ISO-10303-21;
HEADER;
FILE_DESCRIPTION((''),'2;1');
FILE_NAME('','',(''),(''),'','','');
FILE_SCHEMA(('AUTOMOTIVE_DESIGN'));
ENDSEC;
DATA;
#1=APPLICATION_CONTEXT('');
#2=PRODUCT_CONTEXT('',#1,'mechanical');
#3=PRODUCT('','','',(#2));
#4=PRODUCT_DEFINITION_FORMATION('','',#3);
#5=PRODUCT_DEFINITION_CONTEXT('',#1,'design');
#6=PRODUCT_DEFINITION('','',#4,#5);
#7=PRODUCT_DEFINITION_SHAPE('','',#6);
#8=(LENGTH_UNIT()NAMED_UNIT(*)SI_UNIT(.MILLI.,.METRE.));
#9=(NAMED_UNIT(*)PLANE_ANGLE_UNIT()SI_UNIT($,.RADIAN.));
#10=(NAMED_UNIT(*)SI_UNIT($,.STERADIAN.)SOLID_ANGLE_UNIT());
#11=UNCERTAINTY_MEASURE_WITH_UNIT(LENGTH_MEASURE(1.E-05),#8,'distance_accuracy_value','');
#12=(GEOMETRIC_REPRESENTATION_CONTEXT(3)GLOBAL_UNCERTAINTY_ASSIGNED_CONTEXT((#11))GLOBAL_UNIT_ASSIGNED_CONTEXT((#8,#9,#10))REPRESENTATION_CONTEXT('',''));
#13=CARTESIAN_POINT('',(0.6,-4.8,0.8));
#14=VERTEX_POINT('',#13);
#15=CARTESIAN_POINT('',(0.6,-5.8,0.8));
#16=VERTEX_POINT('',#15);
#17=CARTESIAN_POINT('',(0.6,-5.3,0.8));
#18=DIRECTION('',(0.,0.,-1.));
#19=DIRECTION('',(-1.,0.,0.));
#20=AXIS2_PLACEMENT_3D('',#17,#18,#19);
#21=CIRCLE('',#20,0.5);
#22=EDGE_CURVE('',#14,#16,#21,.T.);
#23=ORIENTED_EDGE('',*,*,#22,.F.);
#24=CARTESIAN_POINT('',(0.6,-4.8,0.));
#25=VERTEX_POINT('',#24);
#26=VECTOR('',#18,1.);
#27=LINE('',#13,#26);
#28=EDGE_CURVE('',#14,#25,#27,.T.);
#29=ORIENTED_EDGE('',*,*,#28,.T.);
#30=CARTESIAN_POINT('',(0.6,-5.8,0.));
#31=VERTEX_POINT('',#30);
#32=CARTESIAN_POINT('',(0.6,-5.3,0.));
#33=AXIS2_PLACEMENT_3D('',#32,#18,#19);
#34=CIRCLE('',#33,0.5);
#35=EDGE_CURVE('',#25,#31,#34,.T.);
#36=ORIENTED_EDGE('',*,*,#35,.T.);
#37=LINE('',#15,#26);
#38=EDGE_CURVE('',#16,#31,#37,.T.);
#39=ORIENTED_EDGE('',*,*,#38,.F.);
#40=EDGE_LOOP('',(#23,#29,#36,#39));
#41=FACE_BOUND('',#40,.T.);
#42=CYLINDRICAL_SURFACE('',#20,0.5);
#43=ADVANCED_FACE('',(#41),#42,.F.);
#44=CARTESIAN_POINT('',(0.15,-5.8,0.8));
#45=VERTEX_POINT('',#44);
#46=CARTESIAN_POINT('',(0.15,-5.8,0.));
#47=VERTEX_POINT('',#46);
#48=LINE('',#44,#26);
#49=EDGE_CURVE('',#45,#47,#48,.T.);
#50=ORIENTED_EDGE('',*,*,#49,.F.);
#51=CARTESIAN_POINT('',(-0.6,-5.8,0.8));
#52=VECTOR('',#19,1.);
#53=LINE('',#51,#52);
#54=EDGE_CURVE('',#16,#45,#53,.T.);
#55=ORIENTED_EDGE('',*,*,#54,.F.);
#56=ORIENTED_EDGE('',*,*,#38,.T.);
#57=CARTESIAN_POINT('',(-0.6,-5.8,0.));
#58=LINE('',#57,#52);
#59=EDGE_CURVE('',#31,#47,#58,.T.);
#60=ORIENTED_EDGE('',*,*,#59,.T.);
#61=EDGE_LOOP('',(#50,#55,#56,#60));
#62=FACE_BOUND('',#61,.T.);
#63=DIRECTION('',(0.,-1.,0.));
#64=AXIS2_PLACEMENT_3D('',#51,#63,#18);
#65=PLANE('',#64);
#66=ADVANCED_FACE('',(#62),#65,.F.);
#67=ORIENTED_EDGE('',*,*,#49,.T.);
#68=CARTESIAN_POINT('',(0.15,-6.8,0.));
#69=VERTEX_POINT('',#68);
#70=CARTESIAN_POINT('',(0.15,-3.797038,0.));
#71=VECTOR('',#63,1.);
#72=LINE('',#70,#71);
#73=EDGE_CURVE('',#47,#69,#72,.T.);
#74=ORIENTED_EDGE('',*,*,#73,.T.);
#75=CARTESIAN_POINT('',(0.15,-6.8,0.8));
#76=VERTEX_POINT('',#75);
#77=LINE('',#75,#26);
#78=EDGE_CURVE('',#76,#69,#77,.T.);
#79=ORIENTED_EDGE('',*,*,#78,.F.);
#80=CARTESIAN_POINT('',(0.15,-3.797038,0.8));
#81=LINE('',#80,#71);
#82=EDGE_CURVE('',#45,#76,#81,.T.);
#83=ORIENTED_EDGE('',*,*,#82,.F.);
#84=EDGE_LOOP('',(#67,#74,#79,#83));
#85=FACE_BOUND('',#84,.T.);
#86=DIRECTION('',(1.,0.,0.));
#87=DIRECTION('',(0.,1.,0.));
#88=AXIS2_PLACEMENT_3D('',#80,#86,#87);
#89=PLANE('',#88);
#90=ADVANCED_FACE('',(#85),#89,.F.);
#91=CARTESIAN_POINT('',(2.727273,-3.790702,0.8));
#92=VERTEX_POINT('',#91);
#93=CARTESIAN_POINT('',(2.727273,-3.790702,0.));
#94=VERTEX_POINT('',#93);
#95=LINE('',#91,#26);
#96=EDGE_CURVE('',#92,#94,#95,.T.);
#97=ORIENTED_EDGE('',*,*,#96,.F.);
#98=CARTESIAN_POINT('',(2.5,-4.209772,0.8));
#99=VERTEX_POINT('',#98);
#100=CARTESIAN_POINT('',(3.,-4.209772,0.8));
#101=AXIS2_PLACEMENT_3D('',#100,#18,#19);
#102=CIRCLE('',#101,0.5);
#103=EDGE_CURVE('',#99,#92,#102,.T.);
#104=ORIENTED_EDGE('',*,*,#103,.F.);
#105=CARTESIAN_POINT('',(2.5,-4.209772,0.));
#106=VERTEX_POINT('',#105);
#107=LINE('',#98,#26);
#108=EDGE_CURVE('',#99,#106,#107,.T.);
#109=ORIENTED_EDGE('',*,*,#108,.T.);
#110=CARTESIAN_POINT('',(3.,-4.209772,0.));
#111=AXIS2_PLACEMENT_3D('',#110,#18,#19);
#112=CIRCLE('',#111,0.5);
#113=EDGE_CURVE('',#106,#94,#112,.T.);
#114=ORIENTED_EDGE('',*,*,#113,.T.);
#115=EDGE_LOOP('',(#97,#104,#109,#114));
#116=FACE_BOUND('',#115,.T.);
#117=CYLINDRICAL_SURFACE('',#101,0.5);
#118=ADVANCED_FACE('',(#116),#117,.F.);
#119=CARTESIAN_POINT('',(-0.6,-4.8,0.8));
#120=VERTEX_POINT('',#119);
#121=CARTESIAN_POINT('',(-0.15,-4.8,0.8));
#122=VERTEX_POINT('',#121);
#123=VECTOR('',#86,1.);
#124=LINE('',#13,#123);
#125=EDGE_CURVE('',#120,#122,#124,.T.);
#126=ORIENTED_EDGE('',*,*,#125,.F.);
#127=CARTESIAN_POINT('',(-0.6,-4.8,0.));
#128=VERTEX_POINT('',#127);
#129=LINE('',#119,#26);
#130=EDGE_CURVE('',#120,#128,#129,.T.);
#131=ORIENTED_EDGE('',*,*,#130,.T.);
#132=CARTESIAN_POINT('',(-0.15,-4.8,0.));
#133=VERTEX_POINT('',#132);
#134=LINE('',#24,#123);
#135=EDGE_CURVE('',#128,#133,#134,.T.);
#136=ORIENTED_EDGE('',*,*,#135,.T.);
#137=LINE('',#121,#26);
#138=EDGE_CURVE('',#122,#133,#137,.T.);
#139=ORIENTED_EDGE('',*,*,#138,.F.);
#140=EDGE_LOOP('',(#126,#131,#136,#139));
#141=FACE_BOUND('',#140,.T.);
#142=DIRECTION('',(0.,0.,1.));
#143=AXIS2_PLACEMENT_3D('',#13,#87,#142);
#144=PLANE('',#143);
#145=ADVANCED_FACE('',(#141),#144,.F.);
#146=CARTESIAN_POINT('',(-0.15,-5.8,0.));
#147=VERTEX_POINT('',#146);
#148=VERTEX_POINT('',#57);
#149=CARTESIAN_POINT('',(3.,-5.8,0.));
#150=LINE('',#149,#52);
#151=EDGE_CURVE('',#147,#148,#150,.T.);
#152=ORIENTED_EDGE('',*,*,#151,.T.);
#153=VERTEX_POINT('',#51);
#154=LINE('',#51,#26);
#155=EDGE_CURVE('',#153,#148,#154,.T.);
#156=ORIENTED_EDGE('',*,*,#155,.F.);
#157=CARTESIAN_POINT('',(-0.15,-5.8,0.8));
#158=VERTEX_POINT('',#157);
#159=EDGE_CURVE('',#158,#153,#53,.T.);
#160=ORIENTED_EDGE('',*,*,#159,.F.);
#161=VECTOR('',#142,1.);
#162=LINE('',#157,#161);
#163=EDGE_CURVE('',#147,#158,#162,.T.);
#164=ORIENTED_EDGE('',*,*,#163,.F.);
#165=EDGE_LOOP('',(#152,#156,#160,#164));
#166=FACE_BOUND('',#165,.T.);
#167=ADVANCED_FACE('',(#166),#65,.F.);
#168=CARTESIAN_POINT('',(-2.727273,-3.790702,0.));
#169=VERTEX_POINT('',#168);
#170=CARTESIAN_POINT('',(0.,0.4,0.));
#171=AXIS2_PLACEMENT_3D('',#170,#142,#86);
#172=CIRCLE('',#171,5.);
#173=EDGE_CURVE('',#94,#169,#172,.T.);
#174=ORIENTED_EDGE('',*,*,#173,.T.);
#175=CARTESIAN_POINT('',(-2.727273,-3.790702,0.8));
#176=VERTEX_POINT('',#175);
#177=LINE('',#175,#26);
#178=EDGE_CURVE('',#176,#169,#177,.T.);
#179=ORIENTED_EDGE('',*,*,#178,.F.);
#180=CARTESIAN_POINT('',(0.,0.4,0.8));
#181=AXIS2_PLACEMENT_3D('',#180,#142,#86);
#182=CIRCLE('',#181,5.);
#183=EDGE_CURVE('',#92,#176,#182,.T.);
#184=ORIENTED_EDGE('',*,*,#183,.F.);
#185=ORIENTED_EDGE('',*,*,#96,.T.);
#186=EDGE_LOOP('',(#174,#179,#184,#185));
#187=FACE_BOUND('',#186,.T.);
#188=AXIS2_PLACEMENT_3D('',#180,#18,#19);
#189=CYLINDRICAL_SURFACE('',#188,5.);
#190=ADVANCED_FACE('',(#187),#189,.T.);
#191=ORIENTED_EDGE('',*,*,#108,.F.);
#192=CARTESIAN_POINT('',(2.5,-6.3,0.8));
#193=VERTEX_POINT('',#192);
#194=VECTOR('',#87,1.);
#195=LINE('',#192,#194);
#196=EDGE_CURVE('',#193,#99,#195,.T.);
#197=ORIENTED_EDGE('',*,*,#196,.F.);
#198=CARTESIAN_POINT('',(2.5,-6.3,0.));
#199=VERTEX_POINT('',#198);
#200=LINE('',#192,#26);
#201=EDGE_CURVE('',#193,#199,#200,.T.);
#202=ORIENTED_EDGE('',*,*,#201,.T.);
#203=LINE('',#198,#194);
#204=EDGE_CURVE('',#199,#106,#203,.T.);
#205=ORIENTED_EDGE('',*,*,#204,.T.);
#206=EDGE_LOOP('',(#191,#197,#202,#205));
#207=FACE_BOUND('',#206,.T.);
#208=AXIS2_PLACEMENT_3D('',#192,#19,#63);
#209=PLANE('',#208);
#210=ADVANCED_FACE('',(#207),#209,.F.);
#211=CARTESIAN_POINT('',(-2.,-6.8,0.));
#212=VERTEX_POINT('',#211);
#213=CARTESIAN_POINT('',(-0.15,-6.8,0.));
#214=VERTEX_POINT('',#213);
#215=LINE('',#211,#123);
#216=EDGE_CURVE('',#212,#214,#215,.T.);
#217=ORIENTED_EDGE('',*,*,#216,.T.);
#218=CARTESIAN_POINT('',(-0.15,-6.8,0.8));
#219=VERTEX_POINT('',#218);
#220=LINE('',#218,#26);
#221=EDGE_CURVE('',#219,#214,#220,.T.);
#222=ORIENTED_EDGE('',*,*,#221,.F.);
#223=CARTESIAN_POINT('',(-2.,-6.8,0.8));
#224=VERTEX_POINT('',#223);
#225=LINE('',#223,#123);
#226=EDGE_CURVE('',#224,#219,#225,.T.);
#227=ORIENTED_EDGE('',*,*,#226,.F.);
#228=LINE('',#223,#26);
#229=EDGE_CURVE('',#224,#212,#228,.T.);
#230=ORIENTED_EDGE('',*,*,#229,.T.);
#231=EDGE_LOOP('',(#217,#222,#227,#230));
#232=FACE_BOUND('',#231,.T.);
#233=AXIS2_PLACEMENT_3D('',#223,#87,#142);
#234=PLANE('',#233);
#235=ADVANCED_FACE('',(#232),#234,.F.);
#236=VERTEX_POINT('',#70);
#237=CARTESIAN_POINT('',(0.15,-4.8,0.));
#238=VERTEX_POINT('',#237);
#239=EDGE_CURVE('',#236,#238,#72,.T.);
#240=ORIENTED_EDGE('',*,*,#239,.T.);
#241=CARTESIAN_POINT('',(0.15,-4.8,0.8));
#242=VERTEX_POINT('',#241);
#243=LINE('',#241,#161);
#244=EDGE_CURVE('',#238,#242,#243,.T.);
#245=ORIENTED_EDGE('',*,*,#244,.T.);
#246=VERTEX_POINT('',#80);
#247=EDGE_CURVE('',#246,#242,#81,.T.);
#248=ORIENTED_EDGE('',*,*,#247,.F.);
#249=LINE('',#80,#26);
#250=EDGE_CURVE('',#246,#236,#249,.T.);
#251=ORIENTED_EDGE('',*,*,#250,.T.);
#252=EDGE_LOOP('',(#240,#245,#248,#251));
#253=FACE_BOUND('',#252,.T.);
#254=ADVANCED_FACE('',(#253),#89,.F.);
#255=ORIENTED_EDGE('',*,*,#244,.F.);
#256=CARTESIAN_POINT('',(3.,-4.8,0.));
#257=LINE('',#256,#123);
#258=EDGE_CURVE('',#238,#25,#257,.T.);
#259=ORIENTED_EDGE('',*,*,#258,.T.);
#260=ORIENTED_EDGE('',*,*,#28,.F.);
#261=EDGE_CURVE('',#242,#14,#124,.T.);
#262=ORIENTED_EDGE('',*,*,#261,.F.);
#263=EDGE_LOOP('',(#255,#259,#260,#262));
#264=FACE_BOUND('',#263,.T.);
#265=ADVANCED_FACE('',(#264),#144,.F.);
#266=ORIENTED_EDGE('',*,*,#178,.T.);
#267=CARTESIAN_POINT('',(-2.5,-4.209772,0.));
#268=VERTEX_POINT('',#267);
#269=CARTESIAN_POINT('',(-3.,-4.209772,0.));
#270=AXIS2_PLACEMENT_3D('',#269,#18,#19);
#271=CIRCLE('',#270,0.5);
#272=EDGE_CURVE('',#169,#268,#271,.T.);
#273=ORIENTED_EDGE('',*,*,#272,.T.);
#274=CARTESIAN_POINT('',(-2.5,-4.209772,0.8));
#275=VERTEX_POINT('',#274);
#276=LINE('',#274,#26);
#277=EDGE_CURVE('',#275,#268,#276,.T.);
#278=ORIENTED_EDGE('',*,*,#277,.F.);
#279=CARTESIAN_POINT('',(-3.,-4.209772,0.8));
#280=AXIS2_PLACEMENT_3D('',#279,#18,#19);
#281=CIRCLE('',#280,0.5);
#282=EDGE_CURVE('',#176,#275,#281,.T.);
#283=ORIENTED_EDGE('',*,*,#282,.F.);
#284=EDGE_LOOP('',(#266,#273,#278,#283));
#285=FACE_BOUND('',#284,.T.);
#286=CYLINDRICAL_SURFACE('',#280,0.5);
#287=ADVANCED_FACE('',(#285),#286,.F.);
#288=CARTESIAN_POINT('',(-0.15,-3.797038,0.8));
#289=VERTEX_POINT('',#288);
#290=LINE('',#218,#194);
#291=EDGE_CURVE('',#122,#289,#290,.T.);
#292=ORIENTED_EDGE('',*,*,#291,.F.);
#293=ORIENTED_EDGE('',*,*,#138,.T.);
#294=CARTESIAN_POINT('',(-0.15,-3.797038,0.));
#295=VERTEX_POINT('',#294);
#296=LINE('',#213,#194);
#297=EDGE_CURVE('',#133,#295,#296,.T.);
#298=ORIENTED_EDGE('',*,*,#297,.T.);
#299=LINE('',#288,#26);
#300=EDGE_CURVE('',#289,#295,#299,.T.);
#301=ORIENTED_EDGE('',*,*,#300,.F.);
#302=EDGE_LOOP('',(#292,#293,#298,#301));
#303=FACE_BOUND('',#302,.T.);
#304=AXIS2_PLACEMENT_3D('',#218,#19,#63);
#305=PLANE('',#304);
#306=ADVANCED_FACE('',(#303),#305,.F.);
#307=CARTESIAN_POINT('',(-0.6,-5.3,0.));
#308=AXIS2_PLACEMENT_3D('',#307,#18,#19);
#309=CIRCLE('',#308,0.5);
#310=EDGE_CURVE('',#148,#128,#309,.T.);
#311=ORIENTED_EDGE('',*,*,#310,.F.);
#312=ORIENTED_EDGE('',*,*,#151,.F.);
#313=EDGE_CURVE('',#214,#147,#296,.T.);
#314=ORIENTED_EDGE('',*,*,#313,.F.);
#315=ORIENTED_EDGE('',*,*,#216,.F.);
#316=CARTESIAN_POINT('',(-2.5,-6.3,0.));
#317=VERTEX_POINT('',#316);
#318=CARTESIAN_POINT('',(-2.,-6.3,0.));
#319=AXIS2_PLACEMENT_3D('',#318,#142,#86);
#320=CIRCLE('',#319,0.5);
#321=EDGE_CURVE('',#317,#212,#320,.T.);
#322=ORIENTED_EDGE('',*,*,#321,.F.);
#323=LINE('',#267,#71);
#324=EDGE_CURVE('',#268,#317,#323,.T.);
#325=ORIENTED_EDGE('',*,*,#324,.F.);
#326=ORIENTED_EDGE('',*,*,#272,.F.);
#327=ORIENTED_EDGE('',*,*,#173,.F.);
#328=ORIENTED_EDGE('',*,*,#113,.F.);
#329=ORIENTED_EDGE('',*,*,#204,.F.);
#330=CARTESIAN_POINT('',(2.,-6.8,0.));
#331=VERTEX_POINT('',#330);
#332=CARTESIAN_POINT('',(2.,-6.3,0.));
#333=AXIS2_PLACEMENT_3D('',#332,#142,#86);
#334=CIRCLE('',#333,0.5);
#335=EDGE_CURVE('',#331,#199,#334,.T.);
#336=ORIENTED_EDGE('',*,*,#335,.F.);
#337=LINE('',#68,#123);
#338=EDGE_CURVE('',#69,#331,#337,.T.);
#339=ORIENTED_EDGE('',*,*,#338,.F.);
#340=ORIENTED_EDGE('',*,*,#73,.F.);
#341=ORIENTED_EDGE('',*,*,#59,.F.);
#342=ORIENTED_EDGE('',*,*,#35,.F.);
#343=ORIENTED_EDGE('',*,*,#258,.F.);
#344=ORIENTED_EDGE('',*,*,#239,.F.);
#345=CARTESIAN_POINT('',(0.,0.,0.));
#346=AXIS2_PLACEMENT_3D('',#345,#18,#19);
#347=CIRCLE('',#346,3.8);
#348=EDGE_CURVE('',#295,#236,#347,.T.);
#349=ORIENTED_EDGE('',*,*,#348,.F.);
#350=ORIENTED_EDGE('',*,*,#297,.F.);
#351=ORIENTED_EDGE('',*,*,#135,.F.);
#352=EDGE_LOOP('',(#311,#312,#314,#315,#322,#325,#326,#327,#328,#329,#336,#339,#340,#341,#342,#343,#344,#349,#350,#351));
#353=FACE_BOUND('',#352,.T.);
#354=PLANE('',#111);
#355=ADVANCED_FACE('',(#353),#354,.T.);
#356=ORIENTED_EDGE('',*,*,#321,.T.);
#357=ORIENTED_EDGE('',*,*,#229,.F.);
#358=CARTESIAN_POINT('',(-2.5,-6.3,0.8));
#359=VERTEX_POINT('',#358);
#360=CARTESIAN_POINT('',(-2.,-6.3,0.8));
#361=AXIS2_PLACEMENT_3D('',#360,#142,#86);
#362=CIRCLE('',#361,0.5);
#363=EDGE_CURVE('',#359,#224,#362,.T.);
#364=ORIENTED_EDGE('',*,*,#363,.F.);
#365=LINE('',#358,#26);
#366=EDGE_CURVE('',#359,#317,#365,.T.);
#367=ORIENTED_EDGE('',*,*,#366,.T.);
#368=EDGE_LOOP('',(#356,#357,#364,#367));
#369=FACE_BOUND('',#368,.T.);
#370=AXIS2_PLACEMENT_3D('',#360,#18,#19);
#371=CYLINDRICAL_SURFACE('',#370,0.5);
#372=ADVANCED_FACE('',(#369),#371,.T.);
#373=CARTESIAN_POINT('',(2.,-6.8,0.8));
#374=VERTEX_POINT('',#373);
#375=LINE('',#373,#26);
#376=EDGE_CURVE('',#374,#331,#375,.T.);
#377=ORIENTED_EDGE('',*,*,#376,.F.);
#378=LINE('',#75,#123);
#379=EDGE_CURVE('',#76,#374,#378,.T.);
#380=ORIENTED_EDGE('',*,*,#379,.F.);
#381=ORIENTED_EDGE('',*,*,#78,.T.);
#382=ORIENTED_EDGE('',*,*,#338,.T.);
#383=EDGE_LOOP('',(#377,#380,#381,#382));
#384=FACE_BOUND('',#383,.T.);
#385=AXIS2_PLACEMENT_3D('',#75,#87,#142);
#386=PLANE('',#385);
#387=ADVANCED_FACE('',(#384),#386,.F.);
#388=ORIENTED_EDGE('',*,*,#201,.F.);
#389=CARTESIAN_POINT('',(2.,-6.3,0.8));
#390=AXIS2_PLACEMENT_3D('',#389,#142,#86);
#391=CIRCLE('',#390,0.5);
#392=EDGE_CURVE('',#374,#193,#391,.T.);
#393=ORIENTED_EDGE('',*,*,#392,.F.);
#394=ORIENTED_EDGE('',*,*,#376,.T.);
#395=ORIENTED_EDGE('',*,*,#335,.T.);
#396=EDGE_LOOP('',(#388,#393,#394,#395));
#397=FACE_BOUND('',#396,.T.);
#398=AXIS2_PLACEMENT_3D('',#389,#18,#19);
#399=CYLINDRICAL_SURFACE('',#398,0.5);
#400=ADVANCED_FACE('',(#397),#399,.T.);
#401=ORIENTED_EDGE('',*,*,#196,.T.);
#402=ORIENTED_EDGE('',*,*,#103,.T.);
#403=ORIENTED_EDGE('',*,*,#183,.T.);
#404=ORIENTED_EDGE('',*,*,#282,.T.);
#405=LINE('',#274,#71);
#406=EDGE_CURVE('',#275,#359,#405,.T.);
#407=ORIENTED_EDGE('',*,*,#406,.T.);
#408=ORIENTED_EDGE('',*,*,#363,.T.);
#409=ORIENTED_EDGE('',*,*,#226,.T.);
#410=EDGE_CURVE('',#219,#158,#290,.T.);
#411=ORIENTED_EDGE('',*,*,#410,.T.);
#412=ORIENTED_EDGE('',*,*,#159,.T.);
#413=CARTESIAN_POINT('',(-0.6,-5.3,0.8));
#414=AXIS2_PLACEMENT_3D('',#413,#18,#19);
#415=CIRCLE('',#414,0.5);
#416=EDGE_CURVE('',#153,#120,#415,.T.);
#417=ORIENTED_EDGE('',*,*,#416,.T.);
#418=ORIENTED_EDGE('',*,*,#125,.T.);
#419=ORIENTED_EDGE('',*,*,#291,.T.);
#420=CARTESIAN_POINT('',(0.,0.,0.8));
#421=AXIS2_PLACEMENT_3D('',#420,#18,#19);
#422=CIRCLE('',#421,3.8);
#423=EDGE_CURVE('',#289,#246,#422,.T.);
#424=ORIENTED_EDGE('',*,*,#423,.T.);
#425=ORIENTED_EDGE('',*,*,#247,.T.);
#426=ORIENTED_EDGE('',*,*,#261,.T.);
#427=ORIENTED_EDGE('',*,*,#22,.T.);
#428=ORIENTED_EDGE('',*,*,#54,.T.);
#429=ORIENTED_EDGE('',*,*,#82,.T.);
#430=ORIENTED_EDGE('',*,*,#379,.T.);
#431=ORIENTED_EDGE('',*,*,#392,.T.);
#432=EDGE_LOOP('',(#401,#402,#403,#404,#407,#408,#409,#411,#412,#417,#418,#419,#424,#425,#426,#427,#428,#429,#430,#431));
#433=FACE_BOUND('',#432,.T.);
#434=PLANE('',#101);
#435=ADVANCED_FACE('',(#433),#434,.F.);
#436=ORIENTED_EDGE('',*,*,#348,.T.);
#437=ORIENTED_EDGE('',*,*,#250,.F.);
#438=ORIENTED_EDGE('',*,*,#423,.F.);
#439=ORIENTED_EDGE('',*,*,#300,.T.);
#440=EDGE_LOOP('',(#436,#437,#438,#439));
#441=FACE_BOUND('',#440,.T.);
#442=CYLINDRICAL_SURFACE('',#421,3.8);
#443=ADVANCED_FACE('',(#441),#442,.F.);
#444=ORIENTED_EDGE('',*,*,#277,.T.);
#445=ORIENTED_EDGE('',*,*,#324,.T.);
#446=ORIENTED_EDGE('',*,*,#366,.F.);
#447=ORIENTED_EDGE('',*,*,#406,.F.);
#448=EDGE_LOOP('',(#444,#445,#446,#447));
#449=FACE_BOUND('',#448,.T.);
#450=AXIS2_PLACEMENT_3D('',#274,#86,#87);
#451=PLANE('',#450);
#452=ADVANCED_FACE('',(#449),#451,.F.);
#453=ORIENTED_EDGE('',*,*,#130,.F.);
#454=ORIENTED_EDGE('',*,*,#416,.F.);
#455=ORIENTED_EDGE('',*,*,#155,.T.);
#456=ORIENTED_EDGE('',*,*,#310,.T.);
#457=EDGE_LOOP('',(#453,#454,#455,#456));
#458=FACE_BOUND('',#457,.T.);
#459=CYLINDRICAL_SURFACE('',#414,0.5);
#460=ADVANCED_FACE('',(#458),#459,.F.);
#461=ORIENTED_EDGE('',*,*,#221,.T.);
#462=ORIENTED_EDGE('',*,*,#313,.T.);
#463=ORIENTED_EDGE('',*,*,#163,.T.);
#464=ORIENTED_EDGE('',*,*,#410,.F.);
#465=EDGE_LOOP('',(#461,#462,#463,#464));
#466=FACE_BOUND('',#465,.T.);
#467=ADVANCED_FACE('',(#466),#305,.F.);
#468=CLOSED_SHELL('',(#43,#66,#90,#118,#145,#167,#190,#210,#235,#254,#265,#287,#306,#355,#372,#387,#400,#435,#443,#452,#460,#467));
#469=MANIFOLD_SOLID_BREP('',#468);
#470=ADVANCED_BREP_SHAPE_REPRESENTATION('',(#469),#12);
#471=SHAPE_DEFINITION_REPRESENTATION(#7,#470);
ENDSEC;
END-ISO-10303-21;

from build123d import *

# Parameters (mm, degrees)
BOSS_EXTRUDE1_DEPTH = 0.8
SKETCH2_R           = 0.5
CUT_EXTRUDE1_DEPTH  = 9.478207358
DELETEFACE1_DEPTH   = 0.8
CUT_EXTRUDE2_DEPTH  = 9.478207358


# Read off the part's stored shape, not the designer's step: DeleteFace1
with BuildPart() as part:
    # Sketch1 → Boss-Extrude1 (new body)
    with BuildSketch(Plane.XY):
        with BuildLine():
            Line((-2.5, -4.209772229), (-2.5, -6.3))
            ThreePointArc((-2.5, -6.3), (-2.353553391, -6.653553391), (-2, -6.8))
            Line((-2, -6.8), (-0.15, -6.8))
            Line((-0.15, -6.8), (-0.15, -3.79703832))
            ThreePointArc((-0.15, -3.79703832), (0, 3.8), (0.15, -3.79703832))
            Line((0.15, -3.79703832), (0.15, -6.8))
            Line((0.15, -6.8), (2, -6.8))
            ThreePointArc((2, -6.8), (2.353553391, -6.653553391), (2.5, -6.3))
            Line((2.5, -6.3), (2.5, -4.209772229))
            ThreePointArc((2.5, -4.209772229), (2.560475464, -3.971406581), (2.727272727, -3.790702026))
            ThreePointArc((2.727272727, -3.790702026), (0, 5.4), (-2.727272727, -3.790702026))
            ThreePointArc((-2.727272727, -3.790702026), (-2.560475464, -3.971406581), (-2.5, -4.209772229))
        make_face()
    extrude(amount=BOSS_EXTRUDE1_DEPTH)

    # Sketch2 → Cut-Extrude1 (cut, through all)
    with BuildSketch(Plane(origin=(0, 0, 0), x_dir=(-1, 0, 0), z_dir=(0, 0, -1))):
        with Locations((-0.6, -5.3)):
            Circle(SKETCH2_R)
        with Locations((0.6, -5.3)):
            Circle(SKETCH2_R)
    extrude(amount=-CUT_EXTRUDE1_DEPTH, mode=Mode.SUBTRACT)

    # DeleteFace1 outline → DeleteFace1 (add)
    with BuildSketch(Plane.XY):
        with BuildLine():
            Line((-0.15, -5.517944947), (-0.15, -5.082055053))
            ThreePointArc((-0.15, -5.082055053), (-1.1, -5.3), (-0.15, -5.517944947))
        make_face()
        with BuildLine():
            Line((0.15, -5.082055053), (0.15, -5.517944947))
            ThreePointArc((0.15, -5.517944947), (1.1, -5.3), (0.15, -5.082055053))
        make_face()
    extrude(amount=DELETEFACE1_DEPTH)

    # Sketch3 → Cut-Extrude2 (cut, through all)
    with BuildSketch(Plane(origin=(0, 0, 0), x_dir=(-1, 0, 0), z_dir=(0, 0, -1))):
        with BuildLine():
            Line((-0.6, -4.8), (0.6, -4.8))
            ThreePointArc((0.6, -4.8), (1.1, -5.3), (0.6, -5.8))
            Line((0.6, -5.8), (-0.6, -5.8))
            ThreePointArc((-0.6, -5.8), (-1.1, -5.3), (-0.6, -4.8))
        make_face()
    extrude(amount=-CUT_EXTRUDE2_DEPTH, mode=Mode.SUBTRACT)


solid = part.part
